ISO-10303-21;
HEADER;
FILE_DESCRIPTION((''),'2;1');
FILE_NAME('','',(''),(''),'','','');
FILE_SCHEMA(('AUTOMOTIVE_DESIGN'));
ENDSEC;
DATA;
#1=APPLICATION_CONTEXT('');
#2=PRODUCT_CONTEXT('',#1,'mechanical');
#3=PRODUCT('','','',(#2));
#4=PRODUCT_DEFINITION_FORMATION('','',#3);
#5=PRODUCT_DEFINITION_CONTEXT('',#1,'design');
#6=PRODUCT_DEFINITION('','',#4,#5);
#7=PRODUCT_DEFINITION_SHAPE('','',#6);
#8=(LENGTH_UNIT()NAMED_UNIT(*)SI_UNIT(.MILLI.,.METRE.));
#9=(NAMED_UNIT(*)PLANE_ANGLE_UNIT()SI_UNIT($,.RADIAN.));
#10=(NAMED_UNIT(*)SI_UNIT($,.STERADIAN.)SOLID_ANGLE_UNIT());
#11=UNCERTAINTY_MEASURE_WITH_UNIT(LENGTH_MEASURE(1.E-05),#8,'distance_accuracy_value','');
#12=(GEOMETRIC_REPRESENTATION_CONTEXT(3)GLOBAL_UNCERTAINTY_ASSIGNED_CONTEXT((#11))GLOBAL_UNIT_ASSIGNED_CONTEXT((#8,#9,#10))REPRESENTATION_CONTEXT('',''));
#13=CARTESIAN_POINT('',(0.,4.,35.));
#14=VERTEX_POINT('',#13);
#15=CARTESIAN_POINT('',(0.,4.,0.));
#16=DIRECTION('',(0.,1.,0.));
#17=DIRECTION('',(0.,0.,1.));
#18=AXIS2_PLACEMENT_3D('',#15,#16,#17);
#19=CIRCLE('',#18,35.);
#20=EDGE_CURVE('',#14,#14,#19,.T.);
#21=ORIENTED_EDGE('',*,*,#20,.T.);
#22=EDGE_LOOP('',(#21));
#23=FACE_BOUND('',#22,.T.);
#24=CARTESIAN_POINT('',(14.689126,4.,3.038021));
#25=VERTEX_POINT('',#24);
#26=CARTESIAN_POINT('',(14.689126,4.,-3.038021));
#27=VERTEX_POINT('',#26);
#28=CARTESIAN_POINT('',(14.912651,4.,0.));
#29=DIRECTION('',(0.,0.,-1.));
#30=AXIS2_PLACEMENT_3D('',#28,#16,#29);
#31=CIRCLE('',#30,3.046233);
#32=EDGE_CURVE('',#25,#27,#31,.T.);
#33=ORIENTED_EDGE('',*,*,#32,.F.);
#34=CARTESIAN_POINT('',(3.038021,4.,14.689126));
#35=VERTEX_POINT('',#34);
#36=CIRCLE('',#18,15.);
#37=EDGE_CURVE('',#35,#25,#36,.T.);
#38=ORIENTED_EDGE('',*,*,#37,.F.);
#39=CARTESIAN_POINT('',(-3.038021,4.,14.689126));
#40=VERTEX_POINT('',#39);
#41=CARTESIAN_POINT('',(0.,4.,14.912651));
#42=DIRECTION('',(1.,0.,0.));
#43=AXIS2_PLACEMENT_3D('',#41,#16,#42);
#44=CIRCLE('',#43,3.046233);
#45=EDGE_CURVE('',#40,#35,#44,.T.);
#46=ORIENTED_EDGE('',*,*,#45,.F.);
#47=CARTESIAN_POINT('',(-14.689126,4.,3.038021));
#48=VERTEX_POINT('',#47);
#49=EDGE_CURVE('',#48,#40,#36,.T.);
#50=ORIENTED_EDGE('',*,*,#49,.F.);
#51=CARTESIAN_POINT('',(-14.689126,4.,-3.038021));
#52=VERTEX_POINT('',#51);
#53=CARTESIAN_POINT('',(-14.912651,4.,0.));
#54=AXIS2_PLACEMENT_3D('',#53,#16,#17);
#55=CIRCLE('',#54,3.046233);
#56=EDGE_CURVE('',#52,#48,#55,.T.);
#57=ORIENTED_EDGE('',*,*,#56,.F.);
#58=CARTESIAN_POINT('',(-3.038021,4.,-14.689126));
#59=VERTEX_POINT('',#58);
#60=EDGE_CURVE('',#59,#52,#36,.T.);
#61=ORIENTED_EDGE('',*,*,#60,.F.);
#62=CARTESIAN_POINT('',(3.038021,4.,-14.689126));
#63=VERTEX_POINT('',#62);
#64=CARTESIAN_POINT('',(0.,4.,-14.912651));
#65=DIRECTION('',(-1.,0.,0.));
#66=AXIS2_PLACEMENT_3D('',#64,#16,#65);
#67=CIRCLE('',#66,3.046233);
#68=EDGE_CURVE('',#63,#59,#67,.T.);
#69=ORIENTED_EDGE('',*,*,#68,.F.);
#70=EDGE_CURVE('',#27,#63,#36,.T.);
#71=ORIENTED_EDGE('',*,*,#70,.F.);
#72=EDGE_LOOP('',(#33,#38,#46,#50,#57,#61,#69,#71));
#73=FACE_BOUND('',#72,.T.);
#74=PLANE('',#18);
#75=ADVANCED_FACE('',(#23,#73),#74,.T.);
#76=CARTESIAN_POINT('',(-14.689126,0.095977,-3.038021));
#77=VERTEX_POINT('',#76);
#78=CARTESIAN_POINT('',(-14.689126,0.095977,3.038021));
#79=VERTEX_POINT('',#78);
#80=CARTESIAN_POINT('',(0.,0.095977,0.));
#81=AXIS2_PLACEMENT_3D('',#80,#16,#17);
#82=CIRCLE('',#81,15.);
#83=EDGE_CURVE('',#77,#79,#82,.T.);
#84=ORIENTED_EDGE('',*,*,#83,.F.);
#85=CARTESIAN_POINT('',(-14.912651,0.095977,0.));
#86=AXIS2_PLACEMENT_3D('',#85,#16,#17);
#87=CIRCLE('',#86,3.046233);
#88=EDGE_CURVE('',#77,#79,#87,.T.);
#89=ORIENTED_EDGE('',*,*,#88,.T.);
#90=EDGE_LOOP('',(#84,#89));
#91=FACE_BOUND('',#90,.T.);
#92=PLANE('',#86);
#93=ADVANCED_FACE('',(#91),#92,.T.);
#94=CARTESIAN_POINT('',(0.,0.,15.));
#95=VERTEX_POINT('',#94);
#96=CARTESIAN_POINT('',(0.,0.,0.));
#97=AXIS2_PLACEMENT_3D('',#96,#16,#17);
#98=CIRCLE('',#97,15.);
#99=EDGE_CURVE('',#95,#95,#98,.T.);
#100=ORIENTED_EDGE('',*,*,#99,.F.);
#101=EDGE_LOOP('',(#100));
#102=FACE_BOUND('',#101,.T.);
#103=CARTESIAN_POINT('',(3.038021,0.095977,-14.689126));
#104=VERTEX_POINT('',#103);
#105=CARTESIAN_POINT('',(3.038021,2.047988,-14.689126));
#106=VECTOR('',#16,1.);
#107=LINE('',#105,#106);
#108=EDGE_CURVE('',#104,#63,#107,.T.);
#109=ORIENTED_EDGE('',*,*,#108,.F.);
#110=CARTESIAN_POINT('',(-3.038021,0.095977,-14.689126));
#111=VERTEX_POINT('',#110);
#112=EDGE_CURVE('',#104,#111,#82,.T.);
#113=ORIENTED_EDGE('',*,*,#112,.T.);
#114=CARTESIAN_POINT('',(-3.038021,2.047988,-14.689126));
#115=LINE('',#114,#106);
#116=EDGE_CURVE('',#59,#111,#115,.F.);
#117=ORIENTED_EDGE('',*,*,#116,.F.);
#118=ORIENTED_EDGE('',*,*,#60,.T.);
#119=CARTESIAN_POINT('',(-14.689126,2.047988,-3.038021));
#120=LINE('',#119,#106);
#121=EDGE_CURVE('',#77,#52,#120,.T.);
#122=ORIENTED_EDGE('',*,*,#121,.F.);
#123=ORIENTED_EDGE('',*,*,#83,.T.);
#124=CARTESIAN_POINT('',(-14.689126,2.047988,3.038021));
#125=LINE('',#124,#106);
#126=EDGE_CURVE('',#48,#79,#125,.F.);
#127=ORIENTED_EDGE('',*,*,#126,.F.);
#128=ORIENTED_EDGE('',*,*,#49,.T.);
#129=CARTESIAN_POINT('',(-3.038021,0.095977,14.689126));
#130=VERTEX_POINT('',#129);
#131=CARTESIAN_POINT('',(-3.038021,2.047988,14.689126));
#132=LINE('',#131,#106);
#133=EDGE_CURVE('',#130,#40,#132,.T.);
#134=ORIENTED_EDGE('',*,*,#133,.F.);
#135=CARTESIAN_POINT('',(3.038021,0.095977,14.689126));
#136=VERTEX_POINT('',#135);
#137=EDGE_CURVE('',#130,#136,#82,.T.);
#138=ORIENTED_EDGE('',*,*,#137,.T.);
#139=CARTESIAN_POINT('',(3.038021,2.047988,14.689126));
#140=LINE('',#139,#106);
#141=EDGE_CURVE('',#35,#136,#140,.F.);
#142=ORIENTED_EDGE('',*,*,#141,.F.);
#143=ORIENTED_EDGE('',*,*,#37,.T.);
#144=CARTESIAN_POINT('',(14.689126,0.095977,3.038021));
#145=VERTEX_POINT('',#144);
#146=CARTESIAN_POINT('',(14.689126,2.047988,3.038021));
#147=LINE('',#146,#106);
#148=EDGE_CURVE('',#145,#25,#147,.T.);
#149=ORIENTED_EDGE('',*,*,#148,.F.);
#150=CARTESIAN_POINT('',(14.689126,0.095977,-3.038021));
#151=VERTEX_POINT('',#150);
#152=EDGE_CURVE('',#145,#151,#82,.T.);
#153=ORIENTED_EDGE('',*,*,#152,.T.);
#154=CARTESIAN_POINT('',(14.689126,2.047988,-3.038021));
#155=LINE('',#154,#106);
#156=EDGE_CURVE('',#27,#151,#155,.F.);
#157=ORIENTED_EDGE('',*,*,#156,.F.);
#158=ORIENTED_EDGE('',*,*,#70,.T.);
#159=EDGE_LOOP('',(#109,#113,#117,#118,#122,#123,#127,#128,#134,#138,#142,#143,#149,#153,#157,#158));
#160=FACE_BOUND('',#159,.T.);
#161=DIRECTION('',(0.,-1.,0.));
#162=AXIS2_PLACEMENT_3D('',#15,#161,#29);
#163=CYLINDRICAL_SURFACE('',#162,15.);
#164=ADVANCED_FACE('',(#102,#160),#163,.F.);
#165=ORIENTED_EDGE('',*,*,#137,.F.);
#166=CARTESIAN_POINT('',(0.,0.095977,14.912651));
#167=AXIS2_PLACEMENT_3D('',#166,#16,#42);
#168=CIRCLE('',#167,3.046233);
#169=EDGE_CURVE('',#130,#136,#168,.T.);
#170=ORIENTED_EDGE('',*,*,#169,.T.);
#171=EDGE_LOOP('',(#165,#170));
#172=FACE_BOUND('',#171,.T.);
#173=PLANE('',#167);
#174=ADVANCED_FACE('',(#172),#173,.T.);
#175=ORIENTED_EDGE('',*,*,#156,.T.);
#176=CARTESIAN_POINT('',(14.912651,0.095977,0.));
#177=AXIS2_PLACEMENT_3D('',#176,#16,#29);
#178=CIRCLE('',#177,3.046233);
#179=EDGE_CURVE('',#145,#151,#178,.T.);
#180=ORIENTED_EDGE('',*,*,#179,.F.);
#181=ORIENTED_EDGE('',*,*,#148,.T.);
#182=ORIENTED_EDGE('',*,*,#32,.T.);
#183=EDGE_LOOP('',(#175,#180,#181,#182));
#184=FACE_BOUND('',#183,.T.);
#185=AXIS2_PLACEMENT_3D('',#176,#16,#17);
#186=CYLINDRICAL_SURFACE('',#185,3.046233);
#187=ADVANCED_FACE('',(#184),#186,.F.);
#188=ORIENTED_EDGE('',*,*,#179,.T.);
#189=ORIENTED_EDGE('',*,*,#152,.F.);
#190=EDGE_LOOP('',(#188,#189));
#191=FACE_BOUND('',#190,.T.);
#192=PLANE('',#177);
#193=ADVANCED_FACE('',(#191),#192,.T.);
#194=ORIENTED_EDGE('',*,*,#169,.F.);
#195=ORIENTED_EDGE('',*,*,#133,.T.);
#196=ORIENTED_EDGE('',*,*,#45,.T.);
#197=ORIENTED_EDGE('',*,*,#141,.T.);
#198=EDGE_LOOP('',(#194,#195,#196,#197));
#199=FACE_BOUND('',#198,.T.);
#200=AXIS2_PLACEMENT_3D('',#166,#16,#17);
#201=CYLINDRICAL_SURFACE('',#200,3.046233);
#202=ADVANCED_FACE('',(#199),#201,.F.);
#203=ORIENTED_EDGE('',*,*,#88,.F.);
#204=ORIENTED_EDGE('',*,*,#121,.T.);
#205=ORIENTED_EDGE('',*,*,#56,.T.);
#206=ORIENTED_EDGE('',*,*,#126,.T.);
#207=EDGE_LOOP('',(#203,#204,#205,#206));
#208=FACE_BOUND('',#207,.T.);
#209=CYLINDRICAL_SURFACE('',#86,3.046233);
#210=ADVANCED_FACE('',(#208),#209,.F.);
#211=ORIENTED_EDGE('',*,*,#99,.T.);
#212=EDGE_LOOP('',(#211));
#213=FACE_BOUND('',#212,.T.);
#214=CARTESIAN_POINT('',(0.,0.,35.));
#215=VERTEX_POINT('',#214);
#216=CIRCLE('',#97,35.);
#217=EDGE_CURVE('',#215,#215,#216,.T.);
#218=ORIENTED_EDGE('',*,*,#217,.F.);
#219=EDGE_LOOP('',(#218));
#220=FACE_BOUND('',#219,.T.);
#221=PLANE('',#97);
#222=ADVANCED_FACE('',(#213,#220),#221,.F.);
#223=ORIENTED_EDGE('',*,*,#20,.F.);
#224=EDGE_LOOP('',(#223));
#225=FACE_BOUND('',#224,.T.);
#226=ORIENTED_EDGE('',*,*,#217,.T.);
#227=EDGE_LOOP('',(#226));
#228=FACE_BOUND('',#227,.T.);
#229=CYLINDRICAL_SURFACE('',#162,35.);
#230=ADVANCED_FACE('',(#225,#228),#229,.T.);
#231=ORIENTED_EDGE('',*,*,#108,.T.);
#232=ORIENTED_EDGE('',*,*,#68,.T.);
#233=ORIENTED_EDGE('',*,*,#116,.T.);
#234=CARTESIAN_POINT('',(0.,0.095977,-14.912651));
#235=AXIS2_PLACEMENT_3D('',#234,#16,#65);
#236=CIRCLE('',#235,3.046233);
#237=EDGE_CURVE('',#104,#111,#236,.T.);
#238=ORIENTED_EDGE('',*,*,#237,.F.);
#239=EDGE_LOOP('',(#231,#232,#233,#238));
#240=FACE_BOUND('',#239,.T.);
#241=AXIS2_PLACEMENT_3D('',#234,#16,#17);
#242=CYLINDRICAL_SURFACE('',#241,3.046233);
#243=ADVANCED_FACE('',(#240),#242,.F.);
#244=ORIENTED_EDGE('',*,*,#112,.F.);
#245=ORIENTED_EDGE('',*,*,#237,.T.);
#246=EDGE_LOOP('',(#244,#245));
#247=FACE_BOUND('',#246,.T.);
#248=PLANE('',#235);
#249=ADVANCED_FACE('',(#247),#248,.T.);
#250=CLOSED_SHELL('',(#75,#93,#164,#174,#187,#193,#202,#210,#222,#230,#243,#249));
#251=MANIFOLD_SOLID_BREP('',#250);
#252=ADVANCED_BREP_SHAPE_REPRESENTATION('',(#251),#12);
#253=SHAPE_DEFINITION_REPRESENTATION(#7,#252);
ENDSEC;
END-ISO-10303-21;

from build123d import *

# Parameters (mm, degrees)
SKETCH1_R           = 35
BOSS_EXTRUDE1_DEPTH = 4
SKETCH2_R           = 15
CUT_EXTRUDE1_DEPTH  = 50.658836072
SKETCH3_R           = 3.046232796
CUT_EXTRUDE2_DEPTH  = 3.904023411
CIRPATTERN1_COUNT   = 4


with BuildPart() as part:
    # Sketch1 → Boss-Extrude1 (new body)
    with BuildSketch(Plane(origin=(0, 0, 0), x_dir=(1, 0, 0), z_dir=(0, 1, 0))):
        Circle(SKETCH1_R)
    extrude(amount=BOSS_EXTRUDE1_DEPTH)

    # Sketch2 → Cut-Extrude1 (cut, through all)
    with BuildSketch(Plane(origin=(0, 0, 0), x_dir=(1, 0, 0), z_dir=(0, 1, 0))):
        Circle(SKETCH2_R)
    extrude(amount=CUT_EXTRUDE1_DEPTH, mode=Mode.SUBTRACT)

    # Sketch3 → Cut-Extrude2 (cut)
    with BuildSketch(Plane(origin=(0, 4, 0), x_dir=(1, 0, 0), z_dir=(0, 1, 0))):
        with Locations((-14.912651385, 0)):
            Circle(SKETCH3_R)
    cut_extrude2 = extrude(amount=-CUT_EXTRUDE2_DEPTH, mode=Mode.SUBTRACT)

    # CirPattern1: Cut-Extrude2 ×4 about axis
    cirpattern1_axis = Axis((0, 0, 0), (0, 1, 0))
    for i in range(1, CIRPATTERN1_COUNT):
        add(cut_extrude2.rotate(cirpattern1_axis, i * 360 / CIRPATTERN1_COUNT), mode=Mode.SUBTRACT)


solid = part.part
